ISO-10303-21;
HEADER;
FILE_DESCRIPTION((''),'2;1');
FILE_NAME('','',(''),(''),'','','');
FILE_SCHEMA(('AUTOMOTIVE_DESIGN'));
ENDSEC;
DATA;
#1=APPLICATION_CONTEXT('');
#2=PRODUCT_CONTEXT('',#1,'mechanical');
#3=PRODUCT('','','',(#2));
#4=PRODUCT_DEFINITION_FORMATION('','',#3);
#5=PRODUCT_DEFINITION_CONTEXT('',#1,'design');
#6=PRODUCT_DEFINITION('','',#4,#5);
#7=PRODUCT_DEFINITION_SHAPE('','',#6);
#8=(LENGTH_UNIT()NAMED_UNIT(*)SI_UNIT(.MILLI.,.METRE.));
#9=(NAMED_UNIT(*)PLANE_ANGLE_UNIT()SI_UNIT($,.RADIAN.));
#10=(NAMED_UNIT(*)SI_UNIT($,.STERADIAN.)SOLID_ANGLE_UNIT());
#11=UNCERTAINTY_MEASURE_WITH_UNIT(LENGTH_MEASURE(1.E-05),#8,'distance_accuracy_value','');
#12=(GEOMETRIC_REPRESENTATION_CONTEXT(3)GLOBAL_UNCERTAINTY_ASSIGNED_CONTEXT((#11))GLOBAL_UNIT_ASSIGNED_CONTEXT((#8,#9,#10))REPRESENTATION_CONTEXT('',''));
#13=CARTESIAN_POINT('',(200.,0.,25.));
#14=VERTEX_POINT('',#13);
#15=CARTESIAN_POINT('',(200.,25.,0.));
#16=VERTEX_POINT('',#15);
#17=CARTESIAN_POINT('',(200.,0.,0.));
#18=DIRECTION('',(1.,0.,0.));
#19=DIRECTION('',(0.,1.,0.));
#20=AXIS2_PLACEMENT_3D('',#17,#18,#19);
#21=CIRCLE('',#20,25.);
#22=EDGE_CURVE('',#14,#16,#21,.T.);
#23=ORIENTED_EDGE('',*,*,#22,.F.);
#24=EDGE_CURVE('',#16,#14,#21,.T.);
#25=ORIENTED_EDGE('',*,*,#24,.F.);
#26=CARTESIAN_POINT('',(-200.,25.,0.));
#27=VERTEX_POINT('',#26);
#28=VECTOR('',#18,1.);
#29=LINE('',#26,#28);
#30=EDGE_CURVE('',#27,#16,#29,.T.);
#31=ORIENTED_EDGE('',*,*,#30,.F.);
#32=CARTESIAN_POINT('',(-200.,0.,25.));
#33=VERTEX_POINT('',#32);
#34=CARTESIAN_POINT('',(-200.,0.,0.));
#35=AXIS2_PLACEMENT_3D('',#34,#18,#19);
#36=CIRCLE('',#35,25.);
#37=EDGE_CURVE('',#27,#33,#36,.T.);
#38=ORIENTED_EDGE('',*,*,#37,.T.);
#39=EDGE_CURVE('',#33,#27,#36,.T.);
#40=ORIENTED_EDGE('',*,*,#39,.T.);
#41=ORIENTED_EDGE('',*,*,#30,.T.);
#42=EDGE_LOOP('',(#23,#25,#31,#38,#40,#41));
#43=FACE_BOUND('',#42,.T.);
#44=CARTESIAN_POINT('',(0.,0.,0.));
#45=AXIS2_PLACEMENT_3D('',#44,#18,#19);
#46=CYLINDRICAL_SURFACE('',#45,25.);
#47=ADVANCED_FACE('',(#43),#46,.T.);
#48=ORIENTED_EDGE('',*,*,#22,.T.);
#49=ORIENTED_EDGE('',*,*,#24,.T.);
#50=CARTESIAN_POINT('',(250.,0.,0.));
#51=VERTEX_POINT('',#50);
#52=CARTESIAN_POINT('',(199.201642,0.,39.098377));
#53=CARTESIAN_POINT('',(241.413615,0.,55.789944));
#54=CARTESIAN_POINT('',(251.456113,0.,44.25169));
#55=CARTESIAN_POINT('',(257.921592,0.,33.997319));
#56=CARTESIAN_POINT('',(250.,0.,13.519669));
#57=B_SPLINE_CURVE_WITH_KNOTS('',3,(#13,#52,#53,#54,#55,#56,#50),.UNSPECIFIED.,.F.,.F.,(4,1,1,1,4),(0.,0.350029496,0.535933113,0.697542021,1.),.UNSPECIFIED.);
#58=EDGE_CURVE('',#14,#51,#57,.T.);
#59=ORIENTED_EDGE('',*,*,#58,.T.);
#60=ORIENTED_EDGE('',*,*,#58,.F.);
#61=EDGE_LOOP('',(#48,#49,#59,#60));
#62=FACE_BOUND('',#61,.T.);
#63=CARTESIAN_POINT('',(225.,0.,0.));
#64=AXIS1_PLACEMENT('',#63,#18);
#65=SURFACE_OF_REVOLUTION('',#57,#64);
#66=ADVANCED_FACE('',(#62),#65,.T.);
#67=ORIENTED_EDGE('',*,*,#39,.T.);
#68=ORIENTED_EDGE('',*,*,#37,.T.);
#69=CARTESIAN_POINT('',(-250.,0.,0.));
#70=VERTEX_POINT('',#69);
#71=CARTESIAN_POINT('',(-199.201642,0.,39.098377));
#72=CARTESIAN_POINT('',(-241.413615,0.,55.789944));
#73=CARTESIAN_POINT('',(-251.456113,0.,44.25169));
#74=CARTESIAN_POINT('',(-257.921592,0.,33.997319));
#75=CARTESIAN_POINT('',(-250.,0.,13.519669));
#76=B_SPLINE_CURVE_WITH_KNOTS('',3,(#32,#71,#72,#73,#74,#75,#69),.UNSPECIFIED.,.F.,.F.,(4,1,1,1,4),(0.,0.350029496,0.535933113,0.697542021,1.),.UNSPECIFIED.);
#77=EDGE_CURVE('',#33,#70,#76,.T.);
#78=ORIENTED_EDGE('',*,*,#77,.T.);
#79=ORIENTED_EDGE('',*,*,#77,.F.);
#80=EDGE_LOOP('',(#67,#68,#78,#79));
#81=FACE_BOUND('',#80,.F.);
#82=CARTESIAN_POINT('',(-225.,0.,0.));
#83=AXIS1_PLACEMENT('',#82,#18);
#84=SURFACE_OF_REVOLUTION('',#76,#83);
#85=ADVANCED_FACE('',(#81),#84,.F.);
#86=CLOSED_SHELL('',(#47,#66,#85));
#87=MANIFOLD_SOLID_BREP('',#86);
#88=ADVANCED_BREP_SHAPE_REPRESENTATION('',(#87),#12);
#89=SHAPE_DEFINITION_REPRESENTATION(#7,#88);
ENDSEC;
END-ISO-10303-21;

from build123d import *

# Parameters (mm, degrees)
F1_R     = 25
F2_DEPTH = 200


# Not quite as in the source:
# - a pattern or mirror of a feature is missing from the dataset's text; its kind, count and spacing are read off the source's solid


with BuildPart() as f2:
    # F1 (on Right) → F2 (new body, symmetric)
    with BuildSketch(Plane.YZ):
        Circle(F1_R)
    extrude(amount=F2_DEPTH, both=True)

    # F3 (on Front) → F4 (revolve)
    with BuildSketch(Plane.XZ):
        with BuildLine():
            add(Edge.make_bspline(
                [(200, 25), (199.201641866, 39.0983767897), (241.4136147213, 55.7899440033), (251.4561134334, 44.2516899933), (257.9215918294, 33.9973185388), (250, 13.5196693598), (250, 0)],
                knots=[0, 0, 0, 0, 0.3500294963, 0.535933113, 0.6975420206, 1, 1, 1, 1], degree=3))
            Line((200, 25), (200, 0))
            Line((200, 0), (250, 0))
        make_face()
    f4 = revolve(axis=Axis((225, 0, 0), (1, 0, 0)))

    # F4_copies: F4 across plane
    add(f4.mirror(Plane(origin=(0, 0, 0), x_dir=(0, 0, -1), z_dir=(-1, 0, 0))))


solid = f2.part
